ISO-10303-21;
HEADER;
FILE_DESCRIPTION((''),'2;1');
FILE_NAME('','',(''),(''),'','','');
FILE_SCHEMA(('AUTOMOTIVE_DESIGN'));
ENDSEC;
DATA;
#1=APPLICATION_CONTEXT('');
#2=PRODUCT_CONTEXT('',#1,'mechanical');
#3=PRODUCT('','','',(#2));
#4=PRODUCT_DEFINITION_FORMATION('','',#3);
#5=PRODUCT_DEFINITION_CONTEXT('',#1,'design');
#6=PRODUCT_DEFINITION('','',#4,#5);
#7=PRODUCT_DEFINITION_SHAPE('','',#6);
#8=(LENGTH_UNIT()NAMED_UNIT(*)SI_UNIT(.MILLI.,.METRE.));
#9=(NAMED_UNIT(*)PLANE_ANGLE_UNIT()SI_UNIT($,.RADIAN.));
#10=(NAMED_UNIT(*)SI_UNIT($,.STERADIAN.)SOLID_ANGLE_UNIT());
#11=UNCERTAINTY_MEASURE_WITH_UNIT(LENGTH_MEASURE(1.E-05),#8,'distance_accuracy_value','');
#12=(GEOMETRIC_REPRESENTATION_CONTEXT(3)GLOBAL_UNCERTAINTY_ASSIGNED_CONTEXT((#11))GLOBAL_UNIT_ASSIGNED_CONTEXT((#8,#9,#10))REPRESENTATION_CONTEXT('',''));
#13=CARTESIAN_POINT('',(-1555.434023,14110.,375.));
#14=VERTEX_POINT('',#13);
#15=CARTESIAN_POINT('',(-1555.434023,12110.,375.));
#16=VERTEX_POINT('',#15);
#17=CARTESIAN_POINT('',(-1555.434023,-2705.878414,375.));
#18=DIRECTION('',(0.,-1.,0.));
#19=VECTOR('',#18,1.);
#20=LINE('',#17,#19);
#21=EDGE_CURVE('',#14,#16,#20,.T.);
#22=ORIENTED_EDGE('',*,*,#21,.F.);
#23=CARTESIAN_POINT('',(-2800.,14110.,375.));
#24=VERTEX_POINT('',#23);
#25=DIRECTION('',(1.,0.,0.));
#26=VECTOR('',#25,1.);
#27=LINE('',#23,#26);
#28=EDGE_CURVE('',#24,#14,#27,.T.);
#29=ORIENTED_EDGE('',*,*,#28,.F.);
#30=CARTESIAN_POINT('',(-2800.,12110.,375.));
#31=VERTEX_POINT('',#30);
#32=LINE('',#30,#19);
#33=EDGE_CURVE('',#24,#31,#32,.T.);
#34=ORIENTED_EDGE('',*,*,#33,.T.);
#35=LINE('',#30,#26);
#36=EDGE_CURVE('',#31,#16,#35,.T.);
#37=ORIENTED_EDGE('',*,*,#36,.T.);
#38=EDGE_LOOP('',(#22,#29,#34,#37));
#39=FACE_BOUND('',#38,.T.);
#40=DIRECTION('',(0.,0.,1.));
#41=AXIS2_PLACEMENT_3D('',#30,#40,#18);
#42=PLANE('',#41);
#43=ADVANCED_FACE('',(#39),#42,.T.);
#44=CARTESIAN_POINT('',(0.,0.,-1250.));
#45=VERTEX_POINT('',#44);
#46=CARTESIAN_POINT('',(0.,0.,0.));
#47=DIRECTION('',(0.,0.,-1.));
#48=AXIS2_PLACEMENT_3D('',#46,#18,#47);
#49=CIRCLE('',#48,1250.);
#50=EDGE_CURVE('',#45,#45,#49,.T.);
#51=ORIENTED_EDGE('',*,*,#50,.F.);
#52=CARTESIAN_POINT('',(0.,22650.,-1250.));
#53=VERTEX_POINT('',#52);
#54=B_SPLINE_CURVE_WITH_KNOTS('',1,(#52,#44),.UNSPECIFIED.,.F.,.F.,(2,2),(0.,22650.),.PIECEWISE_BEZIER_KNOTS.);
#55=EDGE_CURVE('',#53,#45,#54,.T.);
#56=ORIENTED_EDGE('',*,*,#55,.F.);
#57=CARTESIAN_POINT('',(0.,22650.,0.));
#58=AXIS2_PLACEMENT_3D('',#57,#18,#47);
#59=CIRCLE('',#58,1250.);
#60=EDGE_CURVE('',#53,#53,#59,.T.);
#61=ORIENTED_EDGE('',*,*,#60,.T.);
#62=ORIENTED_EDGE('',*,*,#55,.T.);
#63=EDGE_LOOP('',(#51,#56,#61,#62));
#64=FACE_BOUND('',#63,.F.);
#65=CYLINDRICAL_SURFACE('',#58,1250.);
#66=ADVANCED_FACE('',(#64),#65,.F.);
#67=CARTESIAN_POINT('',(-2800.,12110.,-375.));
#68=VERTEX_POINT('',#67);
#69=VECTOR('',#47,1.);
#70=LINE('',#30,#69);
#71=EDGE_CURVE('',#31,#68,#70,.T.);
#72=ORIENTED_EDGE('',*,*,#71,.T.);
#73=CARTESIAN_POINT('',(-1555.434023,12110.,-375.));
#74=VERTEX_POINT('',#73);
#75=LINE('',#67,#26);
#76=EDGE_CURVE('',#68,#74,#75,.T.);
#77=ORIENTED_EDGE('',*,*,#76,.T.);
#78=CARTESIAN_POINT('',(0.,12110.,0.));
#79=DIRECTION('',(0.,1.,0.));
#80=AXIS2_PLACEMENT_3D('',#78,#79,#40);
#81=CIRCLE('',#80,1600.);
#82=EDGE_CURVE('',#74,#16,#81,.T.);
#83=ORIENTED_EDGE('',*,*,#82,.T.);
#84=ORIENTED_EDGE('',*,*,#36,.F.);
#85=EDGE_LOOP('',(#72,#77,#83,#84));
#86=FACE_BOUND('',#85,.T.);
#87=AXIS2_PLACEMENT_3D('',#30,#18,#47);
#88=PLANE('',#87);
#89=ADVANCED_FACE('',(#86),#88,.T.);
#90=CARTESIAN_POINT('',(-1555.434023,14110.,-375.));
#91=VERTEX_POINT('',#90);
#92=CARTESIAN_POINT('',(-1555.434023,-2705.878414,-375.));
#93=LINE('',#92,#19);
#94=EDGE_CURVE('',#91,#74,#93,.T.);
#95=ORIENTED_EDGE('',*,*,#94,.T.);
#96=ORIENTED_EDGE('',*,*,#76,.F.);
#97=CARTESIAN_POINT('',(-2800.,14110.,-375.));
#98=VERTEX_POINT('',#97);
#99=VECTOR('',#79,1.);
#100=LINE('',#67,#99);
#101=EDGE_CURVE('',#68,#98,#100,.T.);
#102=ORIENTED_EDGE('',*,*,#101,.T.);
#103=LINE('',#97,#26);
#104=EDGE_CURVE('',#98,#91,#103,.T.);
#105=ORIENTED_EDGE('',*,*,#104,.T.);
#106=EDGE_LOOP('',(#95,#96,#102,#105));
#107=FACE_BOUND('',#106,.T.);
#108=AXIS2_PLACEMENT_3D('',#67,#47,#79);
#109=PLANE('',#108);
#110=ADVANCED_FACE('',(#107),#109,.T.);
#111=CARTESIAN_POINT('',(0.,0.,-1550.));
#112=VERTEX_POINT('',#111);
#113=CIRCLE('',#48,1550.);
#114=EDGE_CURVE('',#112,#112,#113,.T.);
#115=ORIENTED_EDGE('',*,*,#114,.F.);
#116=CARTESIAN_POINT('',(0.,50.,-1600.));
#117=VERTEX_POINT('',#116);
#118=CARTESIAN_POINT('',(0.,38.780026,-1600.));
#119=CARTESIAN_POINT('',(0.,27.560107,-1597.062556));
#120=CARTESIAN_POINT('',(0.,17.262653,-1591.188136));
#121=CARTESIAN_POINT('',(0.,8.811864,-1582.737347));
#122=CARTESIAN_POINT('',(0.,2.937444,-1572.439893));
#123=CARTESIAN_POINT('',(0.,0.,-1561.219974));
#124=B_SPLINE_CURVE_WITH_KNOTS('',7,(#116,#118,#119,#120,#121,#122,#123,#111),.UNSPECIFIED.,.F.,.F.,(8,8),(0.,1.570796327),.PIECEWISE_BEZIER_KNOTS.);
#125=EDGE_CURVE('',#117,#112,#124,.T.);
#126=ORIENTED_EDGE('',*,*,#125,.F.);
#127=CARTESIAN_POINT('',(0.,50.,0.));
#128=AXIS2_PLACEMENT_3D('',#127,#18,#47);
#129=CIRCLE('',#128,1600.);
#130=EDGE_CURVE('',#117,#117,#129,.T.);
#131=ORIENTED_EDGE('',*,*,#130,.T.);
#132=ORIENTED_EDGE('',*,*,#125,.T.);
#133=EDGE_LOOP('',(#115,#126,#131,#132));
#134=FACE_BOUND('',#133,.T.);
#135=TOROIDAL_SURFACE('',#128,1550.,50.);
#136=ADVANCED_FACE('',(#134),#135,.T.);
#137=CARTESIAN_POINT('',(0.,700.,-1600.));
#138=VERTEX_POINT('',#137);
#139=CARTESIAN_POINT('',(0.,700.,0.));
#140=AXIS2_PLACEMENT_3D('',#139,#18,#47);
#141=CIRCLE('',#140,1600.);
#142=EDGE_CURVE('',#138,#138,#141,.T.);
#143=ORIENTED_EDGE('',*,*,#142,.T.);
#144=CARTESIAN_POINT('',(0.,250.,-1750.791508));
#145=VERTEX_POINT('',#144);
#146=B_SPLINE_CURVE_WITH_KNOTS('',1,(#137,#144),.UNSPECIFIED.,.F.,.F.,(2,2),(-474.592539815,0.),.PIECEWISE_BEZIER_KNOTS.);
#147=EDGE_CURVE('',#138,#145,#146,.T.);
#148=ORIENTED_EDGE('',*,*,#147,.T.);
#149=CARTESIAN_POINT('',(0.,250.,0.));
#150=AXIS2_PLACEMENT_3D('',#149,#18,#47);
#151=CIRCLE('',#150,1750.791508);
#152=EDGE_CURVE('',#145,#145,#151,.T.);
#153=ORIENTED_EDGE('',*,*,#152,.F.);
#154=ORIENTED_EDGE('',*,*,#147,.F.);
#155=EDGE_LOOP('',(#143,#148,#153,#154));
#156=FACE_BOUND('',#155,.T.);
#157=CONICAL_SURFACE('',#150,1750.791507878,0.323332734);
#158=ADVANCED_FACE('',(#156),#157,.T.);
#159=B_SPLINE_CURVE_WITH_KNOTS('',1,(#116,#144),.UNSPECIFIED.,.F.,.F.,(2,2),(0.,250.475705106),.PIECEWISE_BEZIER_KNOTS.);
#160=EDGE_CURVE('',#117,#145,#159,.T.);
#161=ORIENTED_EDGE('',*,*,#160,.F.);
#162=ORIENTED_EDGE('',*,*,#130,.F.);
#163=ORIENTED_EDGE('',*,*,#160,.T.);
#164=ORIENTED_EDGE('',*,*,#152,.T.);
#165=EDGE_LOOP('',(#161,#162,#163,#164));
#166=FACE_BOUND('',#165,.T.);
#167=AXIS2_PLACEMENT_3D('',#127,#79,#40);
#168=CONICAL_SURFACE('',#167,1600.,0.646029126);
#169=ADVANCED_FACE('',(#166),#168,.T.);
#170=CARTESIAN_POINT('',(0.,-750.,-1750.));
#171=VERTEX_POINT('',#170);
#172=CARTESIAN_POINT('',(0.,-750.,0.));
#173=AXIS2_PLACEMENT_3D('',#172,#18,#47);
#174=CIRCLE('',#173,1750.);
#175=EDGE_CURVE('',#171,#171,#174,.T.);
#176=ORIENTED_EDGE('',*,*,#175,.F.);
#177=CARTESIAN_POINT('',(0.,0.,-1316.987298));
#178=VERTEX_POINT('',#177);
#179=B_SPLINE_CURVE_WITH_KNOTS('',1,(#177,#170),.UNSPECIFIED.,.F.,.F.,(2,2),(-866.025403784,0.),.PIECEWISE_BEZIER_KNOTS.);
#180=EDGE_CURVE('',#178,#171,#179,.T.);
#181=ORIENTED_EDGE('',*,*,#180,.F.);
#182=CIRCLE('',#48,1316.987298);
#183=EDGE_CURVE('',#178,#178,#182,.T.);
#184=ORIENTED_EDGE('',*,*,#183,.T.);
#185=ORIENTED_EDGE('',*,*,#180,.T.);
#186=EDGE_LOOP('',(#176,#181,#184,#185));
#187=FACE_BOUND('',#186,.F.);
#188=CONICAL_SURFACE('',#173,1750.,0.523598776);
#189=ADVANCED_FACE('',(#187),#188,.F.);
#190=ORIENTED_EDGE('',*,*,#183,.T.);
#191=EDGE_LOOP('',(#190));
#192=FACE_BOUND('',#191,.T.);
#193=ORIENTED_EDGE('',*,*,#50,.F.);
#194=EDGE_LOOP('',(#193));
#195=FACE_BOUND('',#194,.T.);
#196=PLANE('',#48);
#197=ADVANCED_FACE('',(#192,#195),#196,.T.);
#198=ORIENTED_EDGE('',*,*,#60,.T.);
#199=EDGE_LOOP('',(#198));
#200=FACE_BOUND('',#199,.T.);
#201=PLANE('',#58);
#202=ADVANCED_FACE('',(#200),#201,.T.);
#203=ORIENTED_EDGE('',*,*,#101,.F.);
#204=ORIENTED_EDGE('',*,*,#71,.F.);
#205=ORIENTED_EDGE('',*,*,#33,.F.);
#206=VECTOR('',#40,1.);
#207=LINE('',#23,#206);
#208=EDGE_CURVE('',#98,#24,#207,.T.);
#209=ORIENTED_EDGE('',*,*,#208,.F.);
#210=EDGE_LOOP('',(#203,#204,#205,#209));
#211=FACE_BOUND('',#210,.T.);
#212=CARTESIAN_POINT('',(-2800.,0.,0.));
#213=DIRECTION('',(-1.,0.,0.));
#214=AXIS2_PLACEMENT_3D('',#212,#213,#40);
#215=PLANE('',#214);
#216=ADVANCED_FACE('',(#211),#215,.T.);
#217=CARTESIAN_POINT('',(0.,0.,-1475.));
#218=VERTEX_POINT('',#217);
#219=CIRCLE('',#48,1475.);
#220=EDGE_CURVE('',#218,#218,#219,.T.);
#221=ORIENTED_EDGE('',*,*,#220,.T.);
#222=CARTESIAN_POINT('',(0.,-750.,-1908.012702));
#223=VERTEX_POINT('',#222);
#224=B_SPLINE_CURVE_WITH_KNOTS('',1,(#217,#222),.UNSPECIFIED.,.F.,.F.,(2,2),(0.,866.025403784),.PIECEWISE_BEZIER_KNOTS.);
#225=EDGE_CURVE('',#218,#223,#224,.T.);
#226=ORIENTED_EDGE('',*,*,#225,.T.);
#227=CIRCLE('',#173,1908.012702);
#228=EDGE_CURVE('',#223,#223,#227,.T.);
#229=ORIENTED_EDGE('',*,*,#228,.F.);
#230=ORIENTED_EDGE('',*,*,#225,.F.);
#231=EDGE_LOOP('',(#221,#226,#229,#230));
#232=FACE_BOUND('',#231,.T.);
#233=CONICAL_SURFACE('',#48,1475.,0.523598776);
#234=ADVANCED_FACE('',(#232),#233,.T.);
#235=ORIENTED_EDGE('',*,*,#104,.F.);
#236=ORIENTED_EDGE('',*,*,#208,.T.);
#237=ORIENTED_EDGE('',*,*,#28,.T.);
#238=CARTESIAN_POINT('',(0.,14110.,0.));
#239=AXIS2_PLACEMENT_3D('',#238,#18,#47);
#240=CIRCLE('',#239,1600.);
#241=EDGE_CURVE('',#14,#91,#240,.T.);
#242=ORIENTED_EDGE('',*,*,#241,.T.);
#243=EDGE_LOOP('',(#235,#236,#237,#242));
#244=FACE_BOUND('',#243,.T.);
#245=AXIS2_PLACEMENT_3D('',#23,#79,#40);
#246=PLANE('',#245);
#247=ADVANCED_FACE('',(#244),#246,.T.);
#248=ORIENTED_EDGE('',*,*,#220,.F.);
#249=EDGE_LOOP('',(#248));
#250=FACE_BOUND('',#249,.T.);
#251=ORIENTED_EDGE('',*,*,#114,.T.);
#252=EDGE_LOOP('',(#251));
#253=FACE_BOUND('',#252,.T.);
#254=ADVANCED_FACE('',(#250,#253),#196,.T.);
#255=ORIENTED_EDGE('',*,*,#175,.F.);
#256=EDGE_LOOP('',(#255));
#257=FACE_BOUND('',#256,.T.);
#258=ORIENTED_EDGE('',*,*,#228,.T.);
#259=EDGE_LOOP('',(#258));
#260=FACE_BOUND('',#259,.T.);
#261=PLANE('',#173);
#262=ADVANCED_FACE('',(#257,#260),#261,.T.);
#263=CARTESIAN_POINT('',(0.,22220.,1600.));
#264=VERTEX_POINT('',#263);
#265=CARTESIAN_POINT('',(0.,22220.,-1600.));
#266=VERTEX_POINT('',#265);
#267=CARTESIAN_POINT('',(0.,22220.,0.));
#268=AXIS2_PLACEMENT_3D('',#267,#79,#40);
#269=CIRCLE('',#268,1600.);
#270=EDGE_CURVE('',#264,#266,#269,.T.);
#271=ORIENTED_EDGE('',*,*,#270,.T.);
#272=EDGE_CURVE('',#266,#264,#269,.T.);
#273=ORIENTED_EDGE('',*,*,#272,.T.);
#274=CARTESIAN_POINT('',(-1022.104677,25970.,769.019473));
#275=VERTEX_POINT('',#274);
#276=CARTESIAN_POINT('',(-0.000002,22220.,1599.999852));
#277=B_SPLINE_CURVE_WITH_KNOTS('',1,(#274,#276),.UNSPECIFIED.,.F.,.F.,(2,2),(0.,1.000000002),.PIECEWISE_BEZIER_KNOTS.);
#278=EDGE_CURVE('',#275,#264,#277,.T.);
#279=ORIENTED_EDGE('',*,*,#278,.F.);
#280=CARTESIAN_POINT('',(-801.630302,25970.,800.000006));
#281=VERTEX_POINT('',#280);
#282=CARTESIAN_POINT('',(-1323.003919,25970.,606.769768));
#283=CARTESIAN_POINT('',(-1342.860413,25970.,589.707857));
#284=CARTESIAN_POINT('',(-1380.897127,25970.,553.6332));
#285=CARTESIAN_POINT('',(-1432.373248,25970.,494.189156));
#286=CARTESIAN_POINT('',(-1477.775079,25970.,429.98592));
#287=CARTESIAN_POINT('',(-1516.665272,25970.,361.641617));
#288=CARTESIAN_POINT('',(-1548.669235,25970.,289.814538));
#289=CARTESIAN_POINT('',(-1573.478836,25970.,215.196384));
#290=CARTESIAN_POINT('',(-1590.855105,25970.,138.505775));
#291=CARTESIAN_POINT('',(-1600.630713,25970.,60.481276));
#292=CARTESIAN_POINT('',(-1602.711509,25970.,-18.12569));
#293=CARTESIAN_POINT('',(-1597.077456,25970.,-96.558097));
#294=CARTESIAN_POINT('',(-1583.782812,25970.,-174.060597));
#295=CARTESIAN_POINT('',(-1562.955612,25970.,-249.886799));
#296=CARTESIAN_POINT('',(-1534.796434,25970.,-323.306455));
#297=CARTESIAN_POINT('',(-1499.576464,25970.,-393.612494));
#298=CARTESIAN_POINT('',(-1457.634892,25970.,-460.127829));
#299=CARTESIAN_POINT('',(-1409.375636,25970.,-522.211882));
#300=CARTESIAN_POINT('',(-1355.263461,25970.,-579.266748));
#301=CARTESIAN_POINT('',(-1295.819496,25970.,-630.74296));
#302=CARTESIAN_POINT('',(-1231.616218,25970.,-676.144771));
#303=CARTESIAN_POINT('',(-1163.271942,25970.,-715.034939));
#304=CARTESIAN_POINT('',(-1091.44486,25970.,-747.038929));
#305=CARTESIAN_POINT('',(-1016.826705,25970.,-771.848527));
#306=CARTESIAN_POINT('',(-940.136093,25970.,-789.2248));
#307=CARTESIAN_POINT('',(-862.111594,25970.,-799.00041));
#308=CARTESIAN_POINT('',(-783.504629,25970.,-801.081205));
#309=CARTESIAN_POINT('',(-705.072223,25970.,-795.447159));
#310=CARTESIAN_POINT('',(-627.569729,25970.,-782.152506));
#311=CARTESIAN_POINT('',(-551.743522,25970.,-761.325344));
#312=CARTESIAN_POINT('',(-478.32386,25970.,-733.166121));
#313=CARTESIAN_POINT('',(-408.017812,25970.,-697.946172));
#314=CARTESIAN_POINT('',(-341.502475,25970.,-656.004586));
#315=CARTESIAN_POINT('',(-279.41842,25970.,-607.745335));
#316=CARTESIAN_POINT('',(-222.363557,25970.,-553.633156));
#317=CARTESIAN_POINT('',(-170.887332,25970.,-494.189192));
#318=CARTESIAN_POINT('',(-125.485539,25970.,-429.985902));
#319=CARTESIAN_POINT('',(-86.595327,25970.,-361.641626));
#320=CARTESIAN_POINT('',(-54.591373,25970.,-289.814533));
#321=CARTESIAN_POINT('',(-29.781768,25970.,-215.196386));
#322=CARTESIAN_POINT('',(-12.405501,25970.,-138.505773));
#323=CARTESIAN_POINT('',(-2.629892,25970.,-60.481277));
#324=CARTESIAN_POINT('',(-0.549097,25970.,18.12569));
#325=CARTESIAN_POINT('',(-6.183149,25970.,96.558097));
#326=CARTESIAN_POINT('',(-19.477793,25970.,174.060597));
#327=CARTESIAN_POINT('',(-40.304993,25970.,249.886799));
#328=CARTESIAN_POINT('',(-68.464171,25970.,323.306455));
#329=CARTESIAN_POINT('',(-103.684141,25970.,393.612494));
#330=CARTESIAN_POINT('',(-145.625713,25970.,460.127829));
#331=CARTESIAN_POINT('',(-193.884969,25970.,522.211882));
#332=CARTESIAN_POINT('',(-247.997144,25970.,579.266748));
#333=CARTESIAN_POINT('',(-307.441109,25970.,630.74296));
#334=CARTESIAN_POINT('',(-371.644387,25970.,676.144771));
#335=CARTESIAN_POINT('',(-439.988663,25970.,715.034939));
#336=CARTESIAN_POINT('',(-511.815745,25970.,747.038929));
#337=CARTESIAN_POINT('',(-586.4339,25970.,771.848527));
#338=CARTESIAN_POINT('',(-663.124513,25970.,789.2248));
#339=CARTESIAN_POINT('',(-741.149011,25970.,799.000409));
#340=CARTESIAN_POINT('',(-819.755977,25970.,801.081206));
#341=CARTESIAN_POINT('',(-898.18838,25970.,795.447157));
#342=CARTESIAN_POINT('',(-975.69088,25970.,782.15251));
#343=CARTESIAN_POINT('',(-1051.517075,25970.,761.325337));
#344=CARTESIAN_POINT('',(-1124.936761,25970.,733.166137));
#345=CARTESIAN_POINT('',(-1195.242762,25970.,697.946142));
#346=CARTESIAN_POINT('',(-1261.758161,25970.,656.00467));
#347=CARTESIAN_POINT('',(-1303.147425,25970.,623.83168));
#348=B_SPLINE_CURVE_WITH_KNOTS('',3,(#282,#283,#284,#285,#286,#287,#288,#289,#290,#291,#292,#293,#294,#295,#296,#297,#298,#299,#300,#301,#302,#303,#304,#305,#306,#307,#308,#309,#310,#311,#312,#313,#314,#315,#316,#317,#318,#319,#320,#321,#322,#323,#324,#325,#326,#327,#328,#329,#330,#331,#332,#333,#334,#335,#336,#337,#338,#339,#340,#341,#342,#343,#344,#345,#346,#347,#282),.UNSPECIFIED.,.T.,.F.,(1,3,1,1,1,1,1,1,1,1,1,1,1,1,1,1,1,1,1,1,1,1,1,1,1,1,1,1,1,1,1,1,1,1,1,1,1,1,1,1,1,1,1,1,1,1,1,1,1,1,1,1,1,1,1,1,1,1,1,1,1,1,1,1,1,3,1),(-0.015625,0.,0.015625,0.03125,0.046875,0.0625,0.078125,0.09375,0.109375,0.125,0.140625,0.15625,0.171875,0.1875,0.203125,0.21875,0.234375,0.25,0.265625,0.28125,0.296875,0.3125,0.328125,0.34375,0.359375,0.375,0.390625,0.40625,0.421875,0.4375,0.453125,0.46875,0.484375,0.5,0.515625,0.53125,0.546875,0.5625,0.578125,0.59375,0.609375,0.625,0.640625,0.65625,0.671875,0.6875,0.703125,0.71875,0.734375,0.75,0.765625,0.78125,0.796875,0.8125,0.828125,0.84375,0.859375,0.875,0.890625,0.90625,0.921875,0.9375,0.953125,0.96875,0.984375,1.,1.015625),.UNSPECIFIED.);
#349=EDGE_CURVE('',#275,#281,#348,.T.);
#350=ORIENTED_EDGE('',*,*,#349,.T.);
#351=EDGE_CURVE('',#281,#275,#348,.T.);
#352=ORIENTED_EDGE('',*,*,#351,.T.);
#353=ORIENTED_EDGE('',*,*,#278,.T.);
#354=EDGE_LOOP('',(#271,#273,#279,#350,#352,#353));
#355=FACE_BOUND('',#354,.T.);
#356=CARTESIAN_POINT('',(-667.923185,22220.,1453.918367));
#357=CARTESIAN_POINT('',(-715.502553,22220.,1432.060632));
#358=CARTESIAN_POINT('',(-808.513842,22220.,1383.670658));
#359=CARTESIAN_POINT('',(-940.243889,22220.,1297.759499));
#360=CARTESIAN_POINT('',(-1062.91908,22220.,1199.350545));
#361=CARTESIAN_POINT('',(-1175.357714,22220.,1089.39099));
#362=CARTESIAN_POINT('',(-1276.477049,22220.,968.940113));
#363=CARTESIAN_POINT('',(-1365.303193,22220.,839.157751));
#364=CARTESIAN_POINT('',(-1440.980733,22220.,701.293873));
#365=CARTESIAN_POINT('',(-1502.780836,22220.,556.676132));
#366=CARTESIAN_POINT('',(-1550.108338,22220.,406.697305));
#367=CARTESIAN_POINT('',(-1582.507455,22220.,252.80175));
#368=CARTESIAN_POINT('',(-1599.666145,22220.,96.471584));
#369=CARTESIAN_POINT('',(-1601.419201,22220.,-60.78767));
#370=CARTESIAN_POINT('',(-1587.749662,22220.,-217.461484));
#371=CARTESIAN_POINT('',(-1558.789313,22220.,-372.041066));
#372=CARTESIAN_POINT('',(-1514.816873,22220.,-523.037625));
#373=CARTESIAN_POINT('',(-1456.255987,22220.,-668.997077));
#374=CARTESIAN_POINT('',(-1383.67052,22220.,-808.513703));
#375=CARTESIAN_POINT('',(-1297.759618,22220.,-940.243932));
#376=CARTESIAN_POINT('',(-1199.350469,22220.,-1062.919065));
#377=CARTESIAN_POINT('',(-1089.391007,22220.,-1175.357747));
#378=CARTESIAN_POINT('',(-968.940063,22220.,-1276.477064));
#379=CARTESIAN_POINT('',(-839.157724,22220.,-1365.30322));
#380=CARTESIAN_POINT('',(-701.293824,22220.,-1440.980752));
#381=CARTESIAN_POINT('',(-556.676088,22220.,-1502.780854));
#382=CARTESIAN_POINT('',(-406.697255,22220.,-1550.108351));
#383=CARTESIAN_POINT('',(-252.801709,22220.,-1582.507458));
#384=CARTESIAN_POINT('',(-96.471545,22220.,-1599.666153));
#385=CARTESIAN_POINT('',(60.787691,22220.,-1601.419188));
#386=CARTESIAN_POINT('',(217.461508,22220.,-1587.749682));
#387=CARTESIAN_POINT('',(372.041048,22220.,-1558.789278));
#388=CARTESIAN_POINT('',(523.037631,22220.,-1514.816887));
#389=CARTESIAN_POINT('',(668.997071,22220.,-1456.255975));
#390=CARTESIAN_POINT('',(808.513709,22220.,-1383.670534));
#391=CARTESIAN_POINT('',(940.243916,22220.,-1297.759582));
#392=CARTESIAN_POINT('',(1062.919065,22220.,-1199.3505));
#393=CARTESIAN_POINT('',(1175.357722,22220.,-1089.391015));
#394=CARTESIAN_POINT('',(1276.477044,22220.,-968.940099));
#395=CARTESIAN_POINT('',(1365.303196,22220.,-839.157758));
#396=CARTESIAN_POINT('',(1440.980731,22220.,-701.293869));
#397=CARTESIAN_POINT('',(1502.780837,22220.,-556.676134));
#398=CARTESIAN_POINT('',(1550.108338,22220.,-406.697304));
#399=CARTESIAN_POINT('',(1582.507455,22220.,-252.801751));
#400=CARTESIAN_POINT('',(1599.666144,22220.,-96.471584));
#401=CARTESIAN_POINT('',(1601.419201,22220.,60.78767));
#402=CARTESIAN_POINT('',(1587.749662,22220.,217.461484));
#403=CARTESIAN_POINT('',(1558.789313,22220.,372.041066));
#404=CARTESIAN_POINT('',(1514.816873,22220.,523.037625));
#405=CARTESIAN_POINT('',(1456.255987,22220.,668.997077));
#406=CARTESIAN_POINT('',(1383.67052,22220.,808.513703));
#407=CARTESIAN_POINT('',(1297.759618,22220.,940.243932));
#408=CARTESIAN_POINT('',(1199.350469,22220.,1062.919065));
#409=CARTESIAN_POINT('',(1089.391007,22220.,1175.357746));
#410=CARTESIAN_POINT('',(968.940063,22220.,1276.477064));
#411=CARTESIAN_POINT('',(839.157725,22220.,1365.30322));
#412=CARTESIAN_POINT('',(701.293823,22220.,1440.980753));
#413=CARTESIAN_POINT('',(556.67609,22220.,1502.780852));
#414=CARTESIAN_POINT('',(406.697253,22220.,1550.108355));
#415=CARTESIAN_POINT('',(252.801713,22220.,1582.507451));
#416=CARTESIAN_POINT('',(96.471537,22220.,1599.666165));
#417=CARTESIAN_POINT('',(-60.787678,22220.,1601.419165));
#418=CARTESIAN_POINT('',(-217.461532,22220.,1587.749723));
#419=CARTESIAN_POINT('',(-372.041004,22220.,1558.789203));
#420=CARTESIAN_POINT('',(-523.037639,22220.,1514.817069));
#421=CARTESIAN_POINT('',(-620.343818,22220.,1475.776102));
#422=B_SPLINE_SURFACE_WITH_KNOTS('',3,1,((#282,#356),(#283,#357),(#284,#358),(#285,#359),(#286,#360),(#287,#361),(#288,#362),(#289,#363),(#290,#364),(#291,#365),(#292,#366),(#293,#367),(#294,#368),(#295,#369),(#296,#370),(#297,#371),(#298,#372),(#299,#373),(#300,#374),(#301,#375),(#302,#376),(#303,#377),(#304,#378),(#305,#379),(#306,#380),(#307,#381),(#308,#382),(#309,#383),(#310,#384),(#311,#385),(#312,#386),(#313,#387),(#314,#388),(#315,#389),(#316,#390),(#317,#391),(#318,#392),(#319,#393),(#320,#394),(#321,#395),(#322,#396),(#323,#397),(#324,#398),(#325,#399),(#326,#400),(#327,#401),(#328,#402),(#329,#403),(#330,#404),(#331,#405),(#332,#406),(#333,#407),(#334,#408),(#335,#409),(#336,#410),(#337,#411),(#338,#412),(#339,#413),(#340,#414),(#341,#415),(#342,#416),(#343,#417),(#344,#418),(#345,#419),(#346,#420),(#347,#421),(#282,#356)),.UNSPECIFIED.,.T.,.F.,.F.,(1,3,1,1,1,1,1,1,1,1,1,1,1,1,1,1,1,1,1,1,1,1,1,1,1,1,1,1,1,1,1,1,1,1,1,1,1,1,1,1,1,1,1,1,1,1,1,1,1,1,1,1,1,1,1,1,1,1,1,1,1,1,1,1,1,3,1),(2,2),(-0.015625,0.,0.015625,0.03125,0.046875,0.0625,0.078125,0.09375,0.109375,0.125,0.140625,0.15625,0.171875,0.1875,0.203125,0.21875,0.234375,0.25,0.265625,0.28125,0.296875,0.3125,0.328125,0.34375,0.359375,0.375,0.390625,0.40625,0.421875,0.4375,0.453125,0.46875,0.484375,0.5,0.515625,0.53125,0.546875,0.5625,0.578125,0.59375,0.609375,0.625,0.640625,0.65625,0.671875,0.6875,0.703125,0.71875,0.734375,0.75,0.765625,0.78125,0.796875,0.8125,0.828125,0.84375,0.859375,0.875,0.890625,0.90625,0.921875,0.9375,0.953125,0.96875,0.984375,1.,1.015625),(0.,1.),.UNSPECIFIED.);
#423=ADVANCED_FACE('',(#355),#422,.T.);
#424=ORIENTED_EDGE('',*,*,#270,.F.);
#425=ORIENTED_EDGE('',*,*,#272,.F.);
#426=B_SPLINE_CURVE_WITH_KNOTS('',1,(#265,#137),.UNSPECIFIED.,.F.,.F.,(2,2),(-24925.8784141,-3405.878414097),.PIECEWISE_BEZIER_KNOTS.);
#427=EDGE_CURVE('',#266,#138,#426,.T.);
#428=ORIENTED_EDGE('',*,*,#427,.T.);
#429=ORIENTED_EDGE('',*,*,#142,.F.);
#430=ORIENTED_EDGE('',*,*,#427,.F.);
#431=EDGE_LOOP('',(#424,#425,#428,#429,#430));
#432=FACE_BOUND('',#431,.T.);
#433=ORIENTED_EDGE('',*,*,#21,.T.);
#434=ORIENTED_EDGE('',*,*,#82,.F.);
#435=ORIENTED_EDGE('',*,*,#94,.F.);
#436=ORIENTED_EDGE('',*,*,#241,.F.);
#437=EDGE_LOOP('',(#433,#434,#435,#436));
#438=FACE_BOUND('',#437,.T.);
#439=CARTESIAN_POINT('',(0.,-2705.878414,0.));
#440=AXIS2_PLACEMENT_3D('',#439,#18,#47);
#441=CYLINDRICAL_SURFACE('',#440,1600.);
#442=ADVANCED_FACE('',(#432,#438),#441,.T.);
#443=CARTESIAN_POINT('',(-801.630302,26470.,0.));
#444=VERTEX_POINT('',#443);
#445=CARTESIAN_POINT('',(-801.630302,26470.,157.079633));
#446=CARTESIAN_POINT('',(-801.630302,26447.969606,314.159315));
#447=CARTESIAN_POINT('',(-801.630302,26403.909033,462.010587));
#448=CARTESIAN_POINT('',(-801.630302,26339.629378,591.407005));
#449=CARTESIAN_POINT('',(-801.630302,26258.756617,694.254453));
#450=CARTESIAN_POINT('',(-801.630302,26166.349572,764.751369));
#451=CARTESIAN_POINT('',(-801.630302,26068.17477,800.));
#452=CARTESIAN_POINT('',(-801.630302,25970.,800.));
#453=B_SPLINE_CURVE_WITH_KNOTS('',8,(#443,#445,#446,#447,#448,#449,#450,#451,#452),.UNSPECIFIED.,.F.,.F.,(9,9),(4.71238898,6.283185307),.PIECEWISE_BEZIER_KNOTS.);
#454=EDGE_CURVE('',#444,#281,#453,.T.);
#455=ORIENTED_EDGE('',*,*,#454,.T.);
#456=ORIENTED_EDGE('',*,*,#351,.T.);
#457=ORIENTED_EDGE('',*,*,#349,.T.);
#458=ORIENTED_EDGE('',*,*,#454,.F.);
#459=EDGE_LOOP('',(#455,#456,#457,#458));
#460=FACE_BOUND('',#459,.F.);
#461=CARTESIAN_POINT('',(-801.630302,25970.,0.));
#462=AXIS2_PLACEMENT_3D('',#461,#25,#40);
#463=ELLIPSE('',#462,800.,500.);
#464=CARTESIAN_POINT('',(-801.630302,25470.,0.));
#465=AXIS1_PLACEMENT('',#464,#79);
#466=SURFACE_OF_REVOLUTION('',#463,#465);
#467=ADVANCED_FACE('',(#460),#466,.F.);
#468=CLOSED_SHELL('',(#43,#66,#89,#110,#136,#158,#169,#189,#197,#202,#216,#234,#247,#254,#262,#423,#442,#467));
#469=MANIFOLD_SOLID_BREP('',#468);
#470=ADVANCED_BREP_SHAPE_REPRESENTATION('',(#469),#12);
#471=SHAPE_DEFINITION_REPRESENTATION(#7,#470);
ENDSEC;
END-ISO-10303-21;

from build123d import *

# Parameters (mm, degrees)
FILLET1_R                            = 50
SKETCH10_W                           = 750
SKETCH10_H                           = 2000
BOSS_EXTRUDE1_DEPTH                  = 1200
BOSS_EXTRUDE1_DIRECTION_2_REACH      = 26740.623
BOSS_EXTRUDE1_DIRECTION_2_END_RADIUS = 1600
SKETCH11_R                           = 1475
BOSS_EXTRUDE2_DEPTH                  = 750
BOSS_EXTRUDE2_DRAFT                  = -30
SKETCH12_R                           = 1750
CUT_EXTRUDE1_DEPTH                   = 750
CUT_EXTRUDE1_DRAFT                   = -30
SKETCH13_R                           = 1250
CUT_EXTRUDE2_DEPTH                   = 22650


with BuildPart() as part:
    # Sketch2 → Revolve1 (revolve)
    with BuildSketch(Plane.XY, mode=Mode.PRIVATE) as revolve1_sk:
        Polygon((1600, 700), (1750.791507878, 250), (1600, 50), (1600, 0), (0, 0), (0, 22220), (1600, 22220), align=None)
    revolve(revolve1_sk.sketch.rotate(Axis((0, -2705.878414097, 0), (0, 1, 0)), 90), axis=Axis((0, -2705.878414097, 0), (0, 1, 0)))

    # Fillet1
    fillet1_edges = [part.edges().sort_by_distance(p)[0] for p in [
        (0, 0, 1600),
    ]]
    fillet(fillet1_edges, radius=FILLET1_R - 0.0001)  # a hair under: the kernel refuses the full size

    # Boundary1: read off the stored shape, not the designer's step
    # Boundary1: loft between two sections, ruled curve by curve
    boundary1_from = [
        Edge.make_bspline([(-1323.003919074, 25970, 606.769768475), (-1342.860413314, 25970, 589.70785677), (-1380.897126833, 25970, 553.633200143), (-1432.373248142, 25970, 494.189156203), (-1477.775079139, 25970, 429.985920218), (-1516.665272091, 25970, 361.64161729), (-1548.66923545, 25970, 289.814537894), (-1573.478835525, 25970, 215.196384006), (-1590.855105019, 25970, 138.505774662), (-1600.630712729, 25970, 60.481275823), (-1602.711508541, 25970, -18.12569002), (-1597.077455882, 25970, -96.558097054), (-1583.782812036, 25970, -174.060597062), (-1562.95561236, 25970, -249.88679919), (-1534.7964336, 25970, -323.306455184), (-1499.576464205, 25970, -393.612493695), (-1457.634891579, 25970, -460.127828885), (-1409.375636075, 25970, -522.211881666), (-1355.263460742, 25970, -579.266748486), (-1295.819495505, 25970, -630.742959815), (-1231.6162184, 25970, -676.144771387), (-1163.27194215, 25970, -715.034939253), (-1091.444859775, 25970, -747.038929331), (-1016.82670521, 25970, -771.848526843), (-940.136092662, 25970, -789.224800035), (-862.111593824, 25970, -799.000409612), (-783.504628952, 25970, -801.081204804), (-705.072222946, 25970, -795.447158848), (-627.569728993, 25970, -782.152506388), (-551.743522229, 25970, -761.325343912), (-478.32386021, 25970, -733.16612145), (-408.017811703, 25970, -697.946171801), (-341.502475056, 25970, -656.004586009), (-279.418419748, 25970, -607.745334848), (-222.36355682, 25970, -553.633156345), (-170.887332284, 25970, -494.189191675), (-125.485538682, 25970, -429.985901669), (-86.595326786, 25970, -361.641626127), (-54.591372639, 25970, -289.814533412), (-29.781767795, 25970, -215.19638642), (-12.405500881, 25970, -138.505773345), (-2.629891763, 25970, -60.481276542), (-0.549096718, 25970, 18.125690411), (-6.18314896, 25970, 96.558096841), (-19.477793033, 25970, 174.060597178), (-40.304992586, 25970, 249.886799127), (-68.464171413, 25970, 323.306455219), (-103.68414077, 25970, 393.612493676), (-145.625713419, 25970, 460.127828897), (-193.884968906, 25970, 522.211881656), (-247.997144258, 25970, 579.266748497), (-307.441109467, 25970, 630.742959798), (-371.644386619, 25970, 676.144771416), (-439.988662784, 25970, 715.034939201), (-511.815745316, 25970, 747.038929427), (-586.43389959, 25970, 771.848526665), (-663.124512673, 25970, 789.224800362), (-741.149010529, 25970, 799.000409012), (-819.755977202, 25970, 801.081205903), (-898.188379908, 25970, 795.447156835), (-975.69087996, 25970, 782.152510127), (-1051.517074943, 25970, 761.32533654), (-1124.936761185, 25970, 733.166136928), (-1195.242761915, 25970, 697.946142179), (-1261.758161392, 25970, 656.00467037), (-1303.147424834, 25970, 623.831680179), (-1323.003919074, 25970, 606.769768475)], [0, 0, 0, 0, 0.015625, 0.03125, 0.046875, 0.0625, 0.078125, 0.09375, 0.109375, 0.125, 0.140625, 0.15625, 0.171875, 0.1875, 0.203125, 0.21875, 0.234375, 0.25, 0.265625, 0.28125, 0.296875, 0.3125, 0.328125, 0.34375, 0.359375, 0.375, 0.390625, 0.40625, 0.421875, 0.4375, 0.453125, 0.46875, 0.484375, 0.5, 0.515625, 0.53125, 0.546875, 0.5625, 0.578125, 0.59375, 0.609375, 0.625, 0.640625, 0.65625, 0.671875, 0.6875, 0.703125, 0.71875, 0.734375, 0.75, 0.765625, 0.78125, 0.796875, 0.8125, 0.828125, 0.84375, 0.859375, 0.875, 0.890625, 0.90625, 0.921875, 0.9375, 0.953125, 0.96875, 0.984375, 1, 1, 1, 1], 3),
    ]
    boundary1_to = [
        Edge.make_bspline([(-667.923185242, 22220, 1453.918367246), (-715.502552549, 22220, 1432.060632122), (-808.513842465, 22220, 1383.670658341), (-940.243888947, 22220, 1297.759499286), (-1062.919079799, 22220, 1199.350545238), (-1175.357713972, 22220, 1089.390989836), (-1276.477048702, 22220, 968.940112529), (-1365.303193281, 22220, 839.157750654), (-1440.980732574, 22220, 701.293873167), (-1502.78083615, 22220, 556.676131724), (-1550.10833796, 22220, 406.697304825), (-1582.50745456, 22220, 252.801750406), (-1599.66614457, 22220, 96.471584468), (-1601.419201143, 22220, -60.7876697), (-1587.749662493, 22220, -217.461483935), (-1558.789313338, 22220, -372.041066137), (-1514.816872828, 22220, -523.037624825), (-1456.255987266, 22220, -668.997076779), (-1383.670520031, 22220, -808.51370253), (-1297.75961843, 22220, -940.243931679), (-1199.350469391, 22220, -1062.919065238), (-1089.391007001, 22220, -1175.357746657), (-968.940063421, 22220, -1276.477063538), (-839.157724165, 22220, -1365.303220444), (-701.293823567, 22220, -1440.980752104), (-556.676088445, 22220, -1502.78085376), (-406.697255474, 22220, -1550.108351335), (-252.801709217, 22220, -1582.507458205), (-96.471544574, 22220, -1599.666152858), (60.787691187, 22220, -1601.419187602), (217.461507755, 22220, -1587.749682305), (372.041048221, 22220, -1558.789277894), (523.037631451, 22220, -1514.816887316), (668.997071089, 22220, -1456.255974911), (808.513709233, 22220, -1383.670534483), (940.243916416, 22220, -1297.759581772), (1062.919064842, 22220, -1199.350500316), (1175.357722211, 22220, -1089.391014585), (1276.477044162, 22220, -968.940098892), (1365.303195776, 22220, -839.157758149), (1440.980731206, 22220, -701.293869059), (1502.780836897, 22220, -556.676133969), (1550.108337552, 22220, -406.697303602), (1582.507454781, 22220, -252.801751071), (1599.666144451, 22220, -96.471584108), (1601.419201208, 22220, 60.787669508), (1587.749662459, 22220, 217.461484035), (1558.789313355, 22220, 372.04106609), (1514.816872817, 22220, 523.037624854), (1456.255987277, 22220, 668.997076756), (1383.670520017, 22220, 808.513702557), (1297.759618455, 22220, 940.243931635), (1199.350469338, 22220, 1062.919065329), (1089.391007105, 22220, 1175.357746483), (968.940063227, 22220, 1276.477063863), (839.157724525, 22220, 1365.303219844), (701.293822904, 22220, 1440.98075321), (556.676089662, 22220, 1502.780851731), (406.697253248, 22220, 1550.108355048), (252.801713278, 22220, 1582.507451429), (96.471537186, 22220, 1599.666165186), (-60.787677778, 22220, 1601.419165228), (-217.461532093, 22220, 1587.749722917), (-372.041003536, 22220, 1558.789203317), (-523.037638623, 22220, 1514.817069086), (-620.343817935, 22220, 1475.77610237), (-667.923185242, 22220, 1453.918367246)], [0, 0, 0, 0, 0.015625, 0.03125, 0.046875, 0.0625, 0.078125, 0.09375, 0.109375, 0.125, 0.140625, 0.15625, 0.171875, 0.1875, 0.203125, 0.21875, 0.234375, 0.25, 0.265625, 0.28125, 0.296875, 0.3125, 0.328125, 0.34375, 0.359375, 0.375, 0.390625, 0.40625, 0.421875, 0.4375, 0.453125, 0.46875, 0.484375, 0.5, 0.515625, 0.53125, 0.546875, 0.5625, 0.578125, 0.59375, 0.609375, 0.625, 0.640625, 0.65625, 0.671875, 0.6875, 0.703125, 0.71875, 0.734375, 0.75, 0.765625, 0.78125, 0.796875, 0.8125, 0.828125, 0.84375, 0.859375, 0.875, 0.890625, 0.90625, 0.921875, 0.9375, 0.953125, 0.96875, 0.984375, 1, 1, 1, 1], 3),
    ]
    boundary1 = Solid(Shell([*[Face.make_surface_from_curves(boundary1_from[k], boundary1_to[k]) for k in range(1)], Face(Wire(boundary1_from)), Face(Wire(boundary1_to))]))
    add(boundary1)

    # Dome1: read off the stored shape, not the designer's step
    # Dome1 outline → Dome1 (revolve)
    with BuildSketch(Plane(origin=(-801.630302494, 0, 0), x_dir=(1, 0, 0), z_dir=(0, 0, 1))):
        with BuildLine():
            add(Edge.make_bspline(
                [(0, 26470), (800, 26470), (800, 25970)],
                knots=[4.71238898, 4.71238898, 4.71238898, 6.283185307, 6.283185307, 6.283185307], degree=2, weights=[1, 0.707106781, 1]))
            Line((0, 26470), (0, 25970))
            Line((0, 25970), (800, 25970))
        make_face()
    revolve(axis=Axis((-801.630302494, 0, 0), (0, 1, 0)))

    # Sketch10 → Boss-Extrude1 (add)
    with BuildSketch(Plane(origin=(-1600, 0, 0), x_dir=(0, 0, -1), z_dir=(1, 0, 0))):
        with Locations((0, 13110)):
            Rectangle(SKETCH10_W, SKETCH10_H)
    extrude(amount=-BOSS_EXTRUDE1_DEPTH)

    # Boss-Extrude1 direction 2: up to this cylinder (the profile starts outside it)
    boss_extrude1_direction_2_end = Plane(origin=(0, 13110, 0), z_dir=(0, -1, 0)) * Cylinder(BOSS_EXTRUDE1_DIRECTION_2_END_RADIUS, 56682.246, mode=Mode.PRIVATE)
    # Sketch10 → Boss-Extrude1 direction 2 (add, up to the surface)
    with BuildSketch(Plane(origin=(-1600, 0, 0), x_dir=(0, 0, -1), z_dir=(1, 0, 0)), mode=Mode.PRIVATE) as boss_extrude1_direction_2_sk1:
        with Locations((0, 13110)):
            Rectangle(SKETCH10_W, SKETCH10_H)
    boss_extrude1_direction_2_tool1 = extrude(boss_extrude1_direction_2_sk1.sketch, amount=BOSS_EXTRUDE1_DIRECTION_2_REACH, mode=Mode.PRIVATE) - boss_extrude1_direction_2_end
    add(boss_extrude1_direction_2_tool1.solids().sort_by_distance((-1600, 13110, 0))[0])
    add(boss_extrude1_direction_2_tool1.solids().sort_by_distance((-1600, 13110, 0))[1])


with BuildPart() as boss_extrude2_tool:
    # Sketch11 → Boss-Extrude2 (with draft: the straight prism first)
    with BuildSketch(Plane.XZ):
        Circle(SKETCH11_R)
    extrude(amount=BOSS_EXTRUDE2_DEPTH)
    # Boss-Extrude2: the draft: its side faces are tilted about the plane it starts from
    boss_extrude2_sides = [boss_extrude2_tool.faces().sort_by_distance(p)[0] for p in [
        (-1475, -375, 0),
    ]]
    draft(boss_extrude2_sides, Plane.XZ, BOSS_EXTRUDE2_DRAFT)


with BuildPart() as part_1:
    add(part.part)

    # Boss-Extrude2: add boss_extrude2_tool
    add(boss_extrude2_tool.part)


with BuildPart() as cut_extrude1_tool:
    # Sketch12 → Cut-Extrude1 (with draft: the straight prism first)
    with BuildSketch(Plane.XZ.offset(750)):
        Circle(SKETCH12_R)
    extrude(amount=-CUT_EXTRUDE1_DEPTH)
    # Cut-Extrude1: the draft: its side faces are tilted about the plane it starts from
    cut_extrude1_sides = [cut_extrude1_tool.faces().sort_by_distance(p)[0] for p in [
        (-1750, -375, 0),
    ]]
    draft(cut_extrude1_sides, Plane.XZ.offset(750), CUT_EXTRUDE1_DRAFT)


with BuildPart() as part_2:
    add(part_1.part)

    # Cut-Extrude1: cut by cut_extrude1_tool
    add(cut_extrude1_tool.part, mode=Mode.SUBTRACT)

    # Sketch13 → Cut-Extrude2 (cut)
    with BuildSketch(Plane.XZ):
        with Locations(Location((0, 0, 0), (0, 0, 270))):
            Circle(SKETCH13_R)
    extrude(amount=-CUT_EXTRUDE2_DEPTH, mode=Mode.SUBTRACT)


solid = part_2.part
